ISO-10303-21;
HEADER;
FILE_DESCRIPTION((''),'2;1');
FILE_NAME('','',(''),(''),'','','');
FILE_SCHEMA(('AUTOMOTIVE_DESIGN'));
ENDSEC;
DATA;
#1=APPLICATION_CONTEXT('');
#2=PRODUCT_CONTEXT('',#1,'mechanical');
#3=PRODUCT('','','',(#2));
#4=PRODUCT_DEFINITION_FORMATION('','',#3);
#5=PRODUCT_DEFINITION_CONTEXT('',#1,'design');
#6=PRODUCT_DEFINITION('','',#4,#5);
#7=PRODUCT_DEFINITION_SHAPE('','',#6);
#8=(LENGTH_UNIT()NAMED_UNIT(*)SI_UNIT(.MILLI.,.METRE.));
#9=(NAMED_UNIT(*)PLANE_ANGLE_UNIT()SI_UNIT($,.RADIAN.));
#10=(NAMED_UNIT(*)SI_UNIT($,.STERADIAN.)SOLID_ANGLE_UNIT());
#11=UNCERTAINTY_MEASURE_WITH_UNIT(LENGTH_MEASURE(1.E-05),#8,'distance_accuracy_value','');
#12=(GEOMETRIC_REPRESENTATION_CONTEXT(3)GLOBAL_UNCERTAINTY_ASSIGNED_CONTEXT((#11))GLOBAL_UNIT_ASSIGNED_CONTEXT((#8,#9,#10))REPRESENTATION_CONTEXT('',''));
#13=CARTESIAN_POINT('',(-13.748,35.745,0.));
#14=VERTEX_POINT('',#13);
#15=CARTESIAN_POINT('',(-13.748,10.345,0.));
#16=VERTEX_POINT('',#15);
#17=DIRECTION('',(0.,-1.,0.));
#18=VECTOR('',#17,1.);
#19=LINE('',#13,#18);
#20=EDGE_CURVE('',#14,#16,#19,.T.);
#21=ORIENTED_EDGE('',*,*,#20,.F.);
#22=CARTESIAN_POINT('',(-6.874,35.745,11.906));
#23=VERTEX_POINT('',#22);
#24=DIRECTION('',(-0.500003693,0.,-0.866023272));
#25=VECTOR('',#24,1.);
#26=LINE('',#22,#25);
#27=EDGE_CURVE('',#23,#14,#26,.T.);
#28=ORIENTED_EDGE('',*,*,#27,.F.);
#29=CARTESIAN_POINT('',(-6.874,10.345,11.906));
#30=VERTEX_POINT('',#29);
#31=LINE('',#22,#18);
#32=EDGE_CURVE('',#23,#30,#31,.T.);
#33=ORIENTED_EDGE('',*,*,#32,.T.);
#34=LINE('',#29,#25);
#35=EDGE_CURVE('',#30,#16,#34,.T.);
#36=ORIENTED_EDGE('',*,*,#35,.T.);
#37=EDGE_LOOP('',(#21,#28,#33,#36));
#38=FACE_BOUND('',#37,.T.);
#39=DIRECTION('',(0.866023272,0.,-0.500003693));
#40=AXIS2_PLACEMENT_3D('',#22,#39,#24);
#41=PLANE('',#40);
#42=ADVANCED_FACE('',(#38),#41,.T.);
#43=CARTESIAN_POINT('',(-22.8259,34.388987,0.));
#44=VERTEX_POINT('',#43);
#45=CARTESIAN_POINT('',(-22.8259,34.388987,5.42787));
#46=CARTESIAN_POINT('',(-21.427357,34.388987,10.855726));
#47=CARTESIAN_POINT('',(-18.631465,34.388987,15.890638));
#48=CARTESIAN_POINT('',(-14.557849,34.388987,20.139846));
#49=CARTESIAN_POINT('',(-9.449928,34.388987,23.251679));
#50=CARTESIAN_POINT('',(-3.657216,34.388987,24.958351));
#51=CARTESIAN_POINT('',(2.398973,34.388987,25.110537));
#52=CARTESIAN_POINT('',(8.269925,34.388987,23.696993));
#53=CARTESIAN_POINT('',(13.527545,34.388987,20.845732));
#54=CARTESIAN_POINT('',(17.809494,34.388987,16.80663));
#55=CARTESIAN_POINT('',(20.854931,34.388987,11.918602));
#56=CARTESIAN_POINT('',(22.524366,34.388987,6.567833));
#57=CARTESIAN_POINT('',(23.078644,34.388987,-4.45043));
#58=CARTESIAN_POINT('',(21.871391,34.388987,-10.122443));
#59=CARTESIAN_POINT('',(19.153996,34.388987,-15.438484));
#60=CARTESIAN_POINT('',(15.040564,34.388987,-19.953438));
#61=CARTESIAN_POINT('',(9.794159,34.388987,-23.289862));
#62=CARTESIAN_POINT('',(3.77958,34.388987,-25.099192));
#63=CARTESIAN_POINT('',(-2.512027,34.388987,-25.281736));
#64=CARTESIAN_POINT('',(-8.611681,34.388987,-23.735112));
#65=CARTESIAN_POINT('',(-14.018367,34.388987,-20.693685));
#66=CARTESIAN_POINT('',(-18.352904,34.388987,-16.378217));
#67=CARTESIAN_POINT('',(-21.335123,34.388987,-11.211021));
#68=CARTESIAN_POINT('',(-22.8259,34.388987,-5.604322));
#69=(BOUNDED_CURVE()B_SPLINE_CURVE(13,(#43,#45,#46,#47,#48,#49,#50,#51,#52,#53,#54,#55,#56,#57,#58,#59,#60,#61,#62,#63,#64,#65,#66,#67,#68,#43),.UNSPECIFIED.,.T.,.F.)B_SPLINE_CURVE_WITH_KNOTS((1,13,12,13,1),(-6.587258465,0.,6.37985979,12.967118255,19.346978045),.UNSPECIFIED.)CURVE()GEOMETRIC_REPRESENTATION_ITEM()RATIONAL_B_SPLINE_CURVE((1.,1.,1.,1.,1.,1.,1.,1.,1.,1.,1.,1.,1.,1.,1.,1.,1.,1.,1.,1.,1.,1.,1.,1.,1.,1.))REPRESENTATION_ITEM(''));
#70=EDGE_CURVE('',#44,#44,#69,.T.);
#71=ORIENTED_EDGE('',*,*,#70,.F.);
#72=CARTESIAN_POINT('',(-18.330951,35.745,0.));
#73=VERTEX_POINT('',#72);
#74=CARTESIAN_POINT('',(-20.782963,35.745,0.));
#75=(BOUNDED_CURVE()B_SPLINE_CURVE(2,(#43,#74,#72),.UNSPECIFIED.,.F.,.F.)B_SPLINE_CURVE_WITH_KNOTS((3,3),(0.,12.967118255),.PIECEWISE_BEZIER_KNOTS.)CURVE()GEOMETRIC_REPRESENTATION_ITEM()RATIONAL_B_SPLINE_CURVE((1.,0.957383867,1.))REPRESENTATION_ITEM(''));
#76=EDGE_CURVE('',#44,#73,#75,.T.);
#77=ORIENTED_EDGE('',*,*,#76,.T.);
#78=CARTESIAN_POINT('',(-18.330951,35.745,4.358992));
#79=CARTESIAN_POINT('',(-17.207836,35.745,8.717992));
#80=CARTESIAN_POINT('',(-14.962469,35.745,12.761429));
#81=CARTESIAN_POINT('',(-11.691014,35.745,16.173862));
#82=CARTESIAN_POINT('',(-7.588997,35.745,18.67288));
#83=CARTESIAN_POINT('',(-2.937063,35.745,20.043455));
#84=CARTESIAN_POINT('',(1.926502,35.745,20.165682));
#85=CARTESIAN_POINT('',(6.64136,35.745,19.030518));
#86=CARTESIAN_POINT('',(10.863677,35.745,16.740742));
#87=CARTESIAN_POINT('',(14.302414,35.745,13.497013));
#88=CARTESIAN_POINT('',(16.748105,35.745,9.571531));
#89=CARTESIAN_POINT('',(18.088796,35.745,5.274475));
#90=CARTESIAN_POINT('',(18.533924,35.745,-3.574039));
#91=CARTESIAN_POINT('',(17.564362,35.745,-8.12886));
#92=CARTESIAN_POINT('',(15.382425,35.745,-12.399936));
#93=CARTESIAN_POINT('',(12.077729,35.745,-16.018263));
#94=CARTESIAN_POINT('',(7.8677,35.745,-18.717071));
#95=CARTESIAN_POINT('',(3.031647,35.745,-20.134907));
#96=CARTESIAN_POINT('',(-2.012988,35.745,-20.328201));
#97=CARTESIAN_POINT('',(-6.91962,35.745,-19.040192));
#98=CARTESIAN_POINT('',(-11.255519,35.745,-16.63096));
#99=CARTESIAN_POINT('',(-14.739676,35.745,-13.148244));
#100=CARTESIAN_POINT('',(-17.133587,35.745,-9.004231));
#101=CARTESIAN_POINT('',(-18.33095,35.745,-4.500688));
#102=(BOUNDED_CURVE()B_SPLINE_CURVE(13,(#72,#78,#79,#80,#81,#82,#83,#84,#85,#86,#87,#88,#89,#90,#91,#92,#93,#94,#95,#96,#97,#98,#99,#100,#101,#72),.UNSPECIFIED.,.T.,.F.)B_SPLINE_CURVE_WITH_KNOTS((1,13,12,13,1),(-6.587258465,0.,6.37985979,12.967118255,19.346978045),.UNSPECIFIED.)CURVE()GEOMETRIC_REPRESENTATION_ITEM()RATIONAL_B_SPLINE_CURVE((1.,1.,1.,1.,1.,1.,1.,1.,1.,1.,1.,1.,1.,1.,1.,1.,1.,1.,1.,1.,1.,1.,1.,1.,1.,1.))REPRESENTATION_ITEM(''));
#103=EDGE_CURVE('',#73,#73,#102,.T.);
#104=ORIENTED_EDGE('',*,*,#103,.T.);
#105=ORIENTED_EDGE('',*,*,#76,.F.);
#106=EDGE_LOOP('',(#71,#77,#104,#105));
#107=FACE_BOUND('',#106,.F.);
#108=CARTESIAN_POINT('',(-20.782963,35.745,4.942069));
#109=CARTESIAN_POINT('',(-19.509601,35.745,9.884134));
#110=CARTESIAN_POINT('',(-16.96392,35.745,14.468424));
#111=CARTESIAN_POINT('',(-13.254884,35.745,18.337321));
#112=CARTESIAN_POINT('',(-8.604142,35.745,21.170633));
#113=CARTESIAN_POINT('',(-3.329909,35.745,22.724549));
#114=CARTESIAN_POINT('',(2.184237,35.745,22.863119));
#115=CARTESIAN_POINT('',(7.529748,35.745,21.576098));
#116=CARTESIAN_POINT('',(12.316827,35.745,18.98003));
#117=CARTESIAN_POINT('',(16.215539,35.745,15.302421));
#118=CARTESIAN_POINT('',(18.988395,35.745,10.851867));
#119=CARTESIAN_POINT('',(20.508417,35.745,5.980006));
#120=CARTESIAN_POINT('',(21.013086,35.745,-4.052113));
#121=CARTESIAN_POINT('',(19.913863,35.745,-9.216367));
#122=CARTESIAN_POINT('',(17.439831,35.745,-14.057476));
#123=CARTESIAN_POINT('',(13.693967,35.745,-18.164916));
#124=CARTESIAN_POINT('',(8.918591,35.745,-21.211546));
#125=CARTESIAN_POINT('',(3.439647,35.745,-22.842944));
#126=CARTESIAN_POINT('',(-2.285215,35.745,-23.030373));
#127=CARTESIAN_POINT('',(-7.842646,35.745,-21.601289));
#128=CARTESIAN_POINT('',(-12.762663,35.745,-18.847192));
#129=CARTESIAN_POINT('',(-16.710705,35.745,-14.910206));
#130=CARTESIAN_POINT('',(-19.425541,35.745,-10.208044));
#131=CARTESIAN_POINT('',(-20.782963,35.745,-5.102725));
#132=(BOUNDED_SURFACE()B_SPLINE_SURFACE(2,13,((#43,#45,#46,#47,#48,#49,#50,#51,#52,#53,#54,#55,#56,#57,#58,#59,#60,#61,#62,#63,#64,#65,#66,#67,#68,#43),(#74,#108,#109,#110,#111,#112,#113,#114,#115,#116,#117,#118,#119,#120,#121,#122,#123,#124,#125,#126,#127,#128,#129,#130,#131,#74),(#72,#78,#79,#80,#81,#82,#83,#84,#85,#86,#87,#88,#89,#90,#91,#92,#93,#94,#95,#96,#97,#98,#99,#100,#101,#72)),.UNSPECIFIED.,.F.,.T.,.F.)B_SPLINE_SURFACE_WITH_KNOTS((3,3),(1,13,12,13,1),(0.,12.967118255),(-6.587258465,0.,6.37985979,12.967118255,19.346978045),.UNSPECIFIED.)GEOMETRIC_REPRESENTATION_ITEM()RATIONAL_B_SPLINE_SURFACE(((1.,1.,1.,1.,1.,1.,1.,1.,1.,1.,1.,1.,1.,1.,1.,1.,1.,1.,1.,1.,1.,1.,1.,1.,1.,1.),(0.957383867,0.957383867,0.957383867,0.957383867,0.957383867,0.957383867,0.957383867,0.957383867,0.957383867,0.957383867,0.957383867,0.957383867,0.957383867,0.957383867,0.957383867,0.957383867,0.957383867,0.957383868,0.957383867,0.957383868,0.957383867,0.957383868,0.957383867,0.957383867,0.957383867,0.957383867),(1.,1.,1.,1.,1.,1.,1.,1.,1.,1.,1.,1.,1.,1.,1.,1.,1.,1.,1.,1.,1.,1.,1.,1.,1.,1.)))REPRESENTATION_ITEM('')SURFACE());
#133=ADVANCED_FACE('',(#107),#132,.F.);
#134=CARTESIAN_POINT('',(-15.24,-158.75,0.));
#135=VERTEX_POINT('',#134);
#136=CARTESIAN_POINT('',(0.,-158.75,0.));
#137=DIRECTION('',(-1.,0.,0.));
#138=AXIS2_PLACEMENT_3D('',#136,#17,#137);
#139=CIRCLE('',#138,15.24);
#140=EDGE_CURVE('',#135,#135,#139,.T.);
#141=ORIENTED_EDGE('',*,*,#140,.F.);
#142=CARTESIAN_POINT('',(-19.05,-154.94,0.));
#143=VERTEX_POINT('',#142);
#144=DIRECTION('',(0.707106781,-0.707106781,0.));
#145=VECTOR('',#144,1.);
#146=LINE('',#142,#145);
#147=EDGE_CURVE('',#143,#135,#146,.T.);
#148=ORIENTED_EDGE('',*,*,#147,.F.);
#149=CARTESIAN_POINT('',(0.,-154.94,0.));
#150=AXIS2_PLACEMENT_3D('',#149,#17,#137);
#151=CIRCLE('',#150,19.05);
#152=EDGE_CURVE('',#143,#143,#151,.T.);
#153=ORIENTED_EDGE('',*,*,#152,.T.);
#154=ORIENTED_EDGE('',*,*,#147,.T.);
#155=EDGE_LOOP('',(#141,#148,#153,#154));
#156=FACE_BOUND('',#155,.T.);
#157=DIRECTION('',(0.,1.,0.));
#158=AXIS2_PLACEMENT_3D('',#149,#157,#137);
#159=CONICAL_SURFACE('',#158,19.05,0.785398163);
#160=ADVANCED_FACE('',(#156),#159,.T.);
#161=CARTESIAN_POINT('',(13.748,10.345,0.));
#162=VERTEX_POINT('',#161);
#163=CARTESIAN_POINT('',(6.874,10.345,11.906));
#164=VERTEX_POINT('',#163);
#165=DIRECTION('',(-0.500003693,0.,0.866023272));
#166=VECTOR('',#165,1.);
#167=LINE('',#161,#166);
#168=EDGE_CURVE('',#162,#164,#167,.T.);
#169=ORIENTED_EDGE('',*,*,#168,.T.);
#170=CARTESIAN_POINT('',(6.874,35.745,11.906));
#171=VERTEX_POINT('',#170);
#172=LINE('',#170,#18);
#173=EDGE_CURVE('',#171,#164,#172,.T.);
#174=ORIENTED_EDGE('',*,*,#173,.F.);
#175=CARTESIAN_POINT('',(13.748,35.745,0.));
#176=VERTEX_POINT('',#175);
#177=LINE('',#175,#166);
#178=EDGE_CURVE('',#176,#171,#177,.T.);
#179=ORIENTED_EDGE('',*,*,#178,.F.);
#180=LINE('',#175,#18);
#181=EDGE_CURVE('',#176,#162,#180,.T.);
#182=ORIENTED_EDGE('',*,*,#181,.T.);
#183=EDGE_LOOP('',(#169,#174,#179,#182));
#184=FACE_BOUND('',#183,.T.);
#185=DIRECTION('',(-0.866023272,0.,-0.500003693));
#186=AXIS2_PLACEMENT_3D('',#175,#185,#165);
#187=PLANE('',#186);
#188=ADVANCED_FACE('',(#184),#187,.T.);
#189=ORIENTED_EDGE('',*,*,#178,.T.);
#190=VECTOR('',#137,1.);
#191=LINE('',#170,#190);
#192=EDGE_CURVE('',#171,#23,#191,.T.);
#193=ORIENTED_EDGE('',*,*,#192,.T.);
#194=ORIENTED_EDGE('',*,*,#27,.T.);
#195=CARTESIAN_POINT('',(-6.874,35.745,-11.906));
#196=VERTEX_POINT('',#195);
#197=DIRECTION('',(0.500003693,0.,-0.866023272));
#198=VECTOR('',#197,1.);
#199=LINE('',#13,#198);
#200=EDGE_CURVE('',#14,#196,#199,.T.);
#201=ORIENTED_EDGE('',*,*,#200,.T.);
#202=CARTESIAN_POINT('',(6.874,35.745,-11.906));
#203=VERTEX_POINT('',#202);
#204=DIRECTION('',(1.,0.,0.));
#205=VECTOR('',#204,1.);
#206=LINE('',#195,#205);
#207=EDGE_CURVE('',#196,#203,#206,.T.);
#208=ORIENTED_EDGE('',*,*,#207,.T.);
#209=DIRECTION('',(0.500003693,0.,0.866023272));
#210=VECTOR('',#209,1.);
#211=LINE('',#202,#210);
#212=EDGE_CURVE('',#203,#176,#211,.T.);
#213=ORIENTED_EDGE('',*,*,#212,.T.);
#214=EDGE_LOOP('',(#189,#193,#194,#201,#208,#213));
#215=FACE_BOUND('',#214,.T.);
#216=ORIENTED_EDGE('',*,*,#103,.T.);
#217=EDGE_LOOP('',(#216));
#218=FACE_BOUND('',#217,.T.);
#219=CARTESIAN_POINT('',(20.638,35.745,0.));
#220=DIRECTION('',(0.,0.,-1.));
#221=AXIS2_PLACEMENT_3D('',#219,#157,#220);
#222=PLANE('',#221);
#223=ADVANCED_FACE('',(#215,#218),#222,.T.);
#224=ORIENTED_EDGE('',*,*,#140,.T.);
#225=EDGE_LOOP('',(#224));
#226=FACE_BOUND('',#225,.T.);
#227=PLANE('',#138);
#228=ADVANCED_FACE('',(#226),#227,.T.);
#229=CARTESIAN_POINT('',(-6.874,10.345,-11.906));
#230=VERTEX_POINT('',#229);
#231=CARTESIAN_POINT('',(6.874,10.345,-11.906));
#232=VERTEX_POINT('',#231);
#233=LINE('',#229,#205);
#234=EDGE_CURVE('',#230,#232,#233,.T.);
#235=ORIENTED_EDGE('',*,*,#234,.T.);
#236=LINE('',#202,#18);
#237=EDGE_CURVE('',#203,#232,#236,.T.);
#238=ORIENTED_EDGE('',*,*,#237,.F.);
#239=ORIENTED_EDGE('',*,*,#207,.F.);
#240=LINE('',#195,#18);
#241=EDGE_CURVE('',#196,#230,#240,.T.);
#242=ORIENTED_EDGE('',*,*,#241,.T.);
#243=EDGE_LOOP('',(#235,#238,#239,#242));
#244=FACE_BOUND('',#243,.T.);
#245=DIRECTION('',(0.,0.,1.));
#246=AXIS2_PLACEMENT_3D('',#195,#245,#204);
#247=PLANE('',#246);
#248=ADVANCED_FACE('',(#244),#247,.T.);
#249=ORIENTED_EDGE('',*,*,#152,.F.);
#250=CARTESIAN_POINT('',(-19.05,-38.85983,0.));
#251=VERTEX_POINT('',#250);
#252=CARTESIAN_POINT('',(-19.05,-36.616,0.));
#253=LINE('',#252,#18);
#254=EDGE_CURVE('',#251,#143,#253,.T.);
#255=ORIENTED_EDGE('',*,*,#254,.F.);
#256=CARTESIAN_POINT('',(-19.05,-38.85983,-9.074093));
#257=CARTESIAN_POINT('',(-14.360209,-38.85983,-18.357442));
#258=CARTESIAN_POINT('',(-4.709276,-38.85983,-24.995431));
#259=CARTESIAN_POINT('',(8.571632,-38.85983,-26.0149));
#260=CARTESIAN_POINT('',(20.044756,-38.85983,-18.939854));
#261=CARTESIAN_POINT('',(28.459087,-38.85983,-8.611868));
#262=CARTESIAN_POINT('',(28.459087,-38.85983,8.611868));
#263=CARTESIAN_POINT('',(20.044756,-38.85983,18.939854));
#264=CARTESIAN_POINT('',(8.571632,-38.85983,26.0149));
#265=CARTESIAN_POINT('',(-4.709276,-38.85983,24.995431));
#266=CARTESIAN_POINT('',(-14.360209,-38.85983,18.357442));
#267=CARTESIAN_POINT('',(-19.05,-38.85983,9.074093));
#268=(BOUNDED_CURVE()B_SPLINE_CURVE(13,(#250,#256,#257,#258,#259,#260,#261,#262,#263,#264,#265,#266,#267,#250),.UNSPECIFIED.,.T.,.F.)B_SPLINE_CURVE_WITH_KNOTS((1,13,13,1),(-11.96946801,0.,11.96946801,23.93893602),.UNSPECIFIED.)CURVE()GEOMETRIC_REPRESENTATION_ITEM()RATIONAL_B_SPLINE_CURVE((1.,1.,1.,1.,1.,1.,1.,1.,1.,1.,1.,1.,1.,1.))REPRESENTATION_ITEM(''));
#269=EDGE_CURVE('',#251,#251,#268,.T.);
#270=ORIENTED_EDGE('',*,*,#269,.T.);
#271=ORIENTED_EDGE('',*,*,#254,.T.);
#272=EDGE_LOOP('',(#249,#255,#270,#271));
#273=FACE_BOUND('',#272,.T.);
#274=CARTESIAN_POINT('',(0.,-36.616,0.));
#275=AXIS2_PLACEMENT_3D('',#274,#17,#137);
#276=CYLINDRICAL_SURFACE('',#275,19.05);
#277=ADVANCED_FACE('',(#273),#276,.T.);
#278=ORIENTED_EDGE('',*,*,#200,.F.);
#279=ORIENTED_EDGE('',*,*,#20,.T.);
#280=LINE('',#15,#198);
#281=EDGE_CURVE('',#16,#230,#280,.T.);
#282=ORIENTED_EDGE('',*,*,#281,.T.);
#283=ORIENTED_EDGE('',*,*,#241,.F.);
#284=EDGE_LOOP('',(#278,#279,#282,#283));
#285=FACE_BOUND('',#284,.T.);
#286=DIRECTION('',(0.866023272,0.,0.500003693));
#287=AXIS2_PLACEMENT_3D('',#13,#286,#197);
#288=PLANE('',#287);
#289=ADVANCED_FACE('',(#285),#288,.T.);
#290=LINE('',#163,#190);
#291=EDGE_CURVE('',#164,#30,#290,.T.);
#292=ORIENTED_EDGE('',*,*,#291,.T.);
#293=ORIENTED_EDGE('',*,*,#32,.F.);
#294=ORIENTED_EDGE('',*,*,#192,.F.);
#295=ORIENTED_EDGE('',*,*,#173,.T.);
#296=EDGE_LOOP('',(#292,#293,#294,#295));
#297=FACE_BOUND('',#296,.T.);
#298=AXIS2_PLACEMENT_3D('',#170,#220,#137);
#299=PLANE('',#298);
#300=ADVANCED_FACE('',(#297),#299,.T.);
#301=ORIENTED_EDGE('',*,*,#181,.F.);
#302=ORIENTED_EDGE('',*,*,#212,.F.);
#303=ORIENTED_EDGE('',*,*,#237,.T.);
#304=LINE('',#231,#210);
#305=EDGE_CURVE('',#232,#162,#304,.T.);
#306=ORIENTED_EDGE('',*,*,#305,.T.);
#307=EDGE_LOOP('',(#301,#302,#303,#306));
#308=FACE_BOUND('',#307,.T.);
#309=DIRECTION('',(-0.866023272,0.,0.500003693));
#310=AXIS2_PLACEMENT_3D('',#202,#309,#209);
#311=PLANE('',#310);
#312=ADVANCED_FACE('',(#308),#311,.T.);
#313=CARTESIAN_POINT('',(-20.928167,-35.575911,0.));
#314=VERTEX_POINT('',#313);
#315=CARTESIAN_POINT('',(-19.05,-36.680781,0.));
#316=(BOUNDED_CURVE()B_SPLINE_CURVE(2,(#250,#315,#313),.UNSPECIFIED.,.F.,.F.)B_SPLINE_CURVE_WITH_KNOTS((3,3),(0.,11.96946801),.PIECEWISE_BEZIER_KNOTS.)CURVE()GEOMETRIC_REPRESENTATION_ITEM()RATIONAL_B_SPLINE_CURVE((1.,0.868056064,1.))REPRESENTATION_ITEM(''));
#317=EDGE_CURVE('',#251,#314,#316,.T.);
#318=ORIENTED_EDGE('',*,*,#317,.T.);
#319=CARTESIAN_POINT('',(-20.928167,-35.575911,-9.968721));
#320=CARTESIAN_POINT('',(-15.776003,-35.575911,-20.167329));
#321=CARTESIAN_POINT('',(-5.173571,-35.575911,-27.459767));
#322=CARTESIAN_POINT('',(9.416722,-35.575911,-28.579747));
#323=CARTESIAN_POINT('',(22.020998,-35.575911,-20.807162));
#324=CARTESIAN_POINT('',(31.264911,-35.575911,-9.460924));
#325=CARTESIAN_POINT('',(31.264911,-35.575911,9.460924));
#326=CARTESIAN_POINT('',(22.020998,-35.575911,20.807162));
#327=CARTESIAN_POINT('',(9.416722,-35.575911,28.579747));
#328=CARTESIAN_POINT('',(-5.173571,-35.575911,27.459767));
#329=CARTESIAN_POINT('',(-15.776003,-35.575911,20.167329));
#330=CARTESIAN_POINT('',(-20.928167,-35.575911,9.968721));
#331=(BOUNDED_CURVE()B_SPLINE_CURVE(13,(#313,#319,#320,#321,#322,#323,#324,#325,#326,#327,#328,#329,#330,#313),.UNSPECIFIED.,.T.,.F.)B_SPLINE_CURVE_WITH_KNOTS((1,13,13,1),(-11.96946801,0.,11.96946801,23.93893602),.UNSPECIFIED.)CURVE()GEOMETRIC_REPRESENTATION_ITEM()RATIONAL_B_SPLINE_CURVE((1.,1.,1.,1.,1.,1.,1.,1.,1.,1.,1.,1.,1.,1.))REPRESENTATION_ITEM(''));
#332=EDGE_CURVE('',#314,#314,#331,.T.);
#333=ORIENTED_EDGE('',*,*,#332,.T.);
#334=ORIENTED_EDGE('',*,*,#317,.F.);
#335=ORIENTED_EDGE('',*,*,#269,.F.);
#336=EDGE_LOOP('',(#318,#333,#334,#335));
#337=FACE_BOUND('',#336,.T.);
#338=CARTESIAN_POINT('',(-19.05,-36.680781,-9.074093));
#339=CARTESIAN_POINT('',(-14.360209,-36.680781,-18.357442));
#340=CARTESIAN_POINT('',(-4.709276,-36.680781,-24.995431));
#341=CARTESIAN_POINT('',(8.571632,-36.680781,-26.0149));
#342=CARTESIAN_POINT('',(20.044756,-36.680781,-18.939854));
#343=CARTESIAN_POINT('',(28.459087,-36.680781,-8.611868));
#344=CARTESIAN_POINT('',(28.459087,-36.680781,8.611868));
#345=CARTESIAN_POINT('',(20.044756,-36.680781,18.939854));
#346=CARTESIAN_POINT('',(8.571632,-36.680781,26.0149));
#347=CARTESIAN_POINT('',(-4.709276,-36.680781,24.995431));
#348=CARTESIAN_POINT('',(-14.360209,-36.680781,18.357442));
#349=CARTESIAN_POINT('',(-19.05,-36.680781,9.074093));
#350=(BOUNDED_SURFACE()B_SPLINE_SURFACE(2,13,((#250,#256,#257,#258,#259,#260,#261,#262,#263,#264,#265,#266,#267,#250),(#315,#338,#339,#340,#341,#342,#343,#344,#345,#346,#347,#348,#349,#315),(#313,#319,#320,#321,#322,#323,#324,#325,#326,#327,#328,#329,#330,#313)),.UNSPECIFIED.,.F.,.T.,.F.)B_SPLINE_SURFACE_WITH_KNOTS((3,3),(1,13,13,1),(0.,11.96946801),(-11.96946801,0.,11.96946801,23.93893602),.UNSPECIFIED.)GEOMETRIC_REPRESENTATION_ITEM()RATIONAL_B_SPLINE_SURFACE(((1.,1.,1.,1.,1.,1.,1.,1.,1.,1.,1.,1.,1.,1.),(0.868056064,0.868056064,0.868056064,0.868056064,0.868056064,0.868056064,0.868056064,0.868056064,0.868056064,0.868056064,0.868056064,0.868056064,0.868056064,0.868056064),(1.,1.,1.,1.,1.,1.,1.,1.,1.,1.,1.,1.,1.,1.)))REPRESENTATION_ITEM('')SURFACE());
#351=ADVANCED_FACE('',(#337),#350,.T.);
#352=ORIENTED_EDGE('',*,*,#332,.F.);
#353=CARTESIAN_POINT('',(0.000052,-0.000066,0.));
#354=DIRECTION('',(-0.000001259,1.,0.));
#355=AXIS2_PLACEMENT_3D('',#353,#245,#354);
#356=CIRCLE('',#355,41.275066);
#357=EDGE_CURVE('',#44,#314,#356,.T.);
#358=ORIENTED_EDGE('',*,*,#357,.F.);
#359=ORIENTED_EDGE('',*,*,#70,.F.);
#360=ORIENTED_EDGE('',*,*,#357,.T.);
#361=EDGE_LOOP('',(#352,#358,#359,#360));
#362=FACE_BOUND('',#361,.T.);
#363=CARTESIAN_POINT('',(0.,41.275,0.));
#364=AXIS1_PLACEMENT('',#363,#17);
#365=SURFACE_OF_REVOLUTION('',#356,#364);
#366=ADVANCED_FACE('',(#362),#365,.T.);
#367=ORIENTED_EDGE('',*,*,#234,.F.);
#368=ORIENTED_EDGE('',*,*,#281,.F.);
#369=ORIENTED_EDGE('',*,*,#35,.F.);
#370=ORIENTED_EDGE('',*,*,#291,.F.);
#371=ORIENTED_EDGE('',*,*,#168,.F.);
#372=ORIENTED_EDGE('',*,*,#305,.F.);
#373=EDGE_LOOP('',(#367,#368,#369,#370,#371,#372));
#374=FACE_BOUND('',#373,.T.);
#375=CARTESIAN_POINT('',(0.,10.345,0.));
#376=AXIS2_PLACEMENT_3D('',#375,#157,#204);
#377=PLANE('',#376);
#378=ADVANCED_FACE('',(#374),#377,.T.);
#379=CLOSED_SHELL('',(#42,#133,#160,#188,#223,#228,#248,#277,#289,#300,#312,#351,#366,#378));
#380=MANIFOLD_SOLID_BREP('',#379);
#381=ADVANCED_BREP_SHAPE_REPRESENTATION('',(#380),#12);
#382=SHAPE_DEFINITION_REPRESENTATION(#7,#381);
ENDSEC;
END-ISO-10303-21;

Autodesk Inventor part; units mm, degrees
ref_plane "YZ Plane" through (0, 0, 0) normal (1, 0, 0) x (0, 1, 0)
sketch "Sketch1" plane through (0, 0, 0) normal (0, 0, 1) x (1, 0, 0)
  line L0 (0, 9.0251) -> (0, -20.025) projected
  arc A0 (0, 4.1275) -> (-1.905, -3.6616) centre (0, 0) ccw
  line L1 (-1.905, -3.6616) -> (-1.905, -15.875)
  line L2 (-1.905, -15.875) -> (0, -15.875)
  dimension "d0" = 8.255
  dimension "d1" = 15.875
  dimension "d2" = 3.81
revolve "Revolution1" add sketch "Sketch1" angle 360 about axis through (0, 0, 0) along (0, -1, 0)
fillet "Fillet1" radius 0.381 1 edges at (1.905, -3.6616, 0)
chamfer "Chamfer1" distance 0.381 angle 45 1 edges at (1.905, -15.875, 0)
sketch "Sketch2" plane through (0, 0, 0) normal (0, 0, 1) x (1, 0, 0)
  line L0 (-1.524, -15.875) -> (-1.905, -15.494) projected
  line L1 (-1.905, -15.494) -> (-1.905, -3.886) projected
  arc A0 (-1.905, -3.886) -> (-2.0928, -3.5576) centre (-2.286, -3.886) ccw projected
  arc A1 (2.0928, -3.5576) -> (-2.0928, -3.5576) centre (0, 0) ccw projected
  arc A2 (2.0928, -3.5576) -> (1.905, -3.886) centre (2.286, -3.886) ccw projected
  line L2 (1.905, -3.886) -> (1.905, -15.494) projected
  line L3 (1.905, -15.494) -> (1.524, -15.875) projected
  line L4 (1.524, -15.875) -> (-1.524, -15.875) projected
  point P0 (2.0638, 3.5745)
ref_plane "Work Plane1" through (0, 0, 0) normal (0, 1, 0) x (-1, 0, 0)
ref_plane "Work Plane2" through (2.0638, 3.5745, 0) normal (0, 1, 0) x (-1, 0, 0)
split "Split1" plane through (2.0638, 3.5745, 0) removes the side toward (0, 1, 0)
fillet "Fillet2" radius 0.8128 1 edges at (2.0638, 3.5745, 0)
sketch "Sketch3" plane through (0, 3.5745, 0) normal (0, 1, 0) x (1, 0, 0)
  circle A0 centre (0, 0) radius 1.524 projected
  line L0 (1.3748, 0) -> (0.6874, -1.1906)
  line L1 (0.6874, -1.1906) -> (-0.6874, -1.1906)
  line L2 (-0.6874, -1.1906) -> (-1.3748, 0)
  line L3 (-1.3748, 0) -> (-0.6874, 1.1906)
  line L4 (-0.6874, 1.1906) -> (0.6874, 1.1906)
  line L5 (0.6874, 1.1906) -> (1.3748, 0)
  dimension "d11" = 2.3813
extrude "Extrusion1" cut sketch "Sketch3" against normal blind 2.54 contours L0 L1 L2 L3 L4 L5
thread "Thread1" size "8-36 UNF" class "2A" standard "ANSI Unified Screw Threads" full length
scale "Scale1" factors (10, 10, 10) then translate (0, 0, 0) bodies 1
properties part number "Pillow Ball"
